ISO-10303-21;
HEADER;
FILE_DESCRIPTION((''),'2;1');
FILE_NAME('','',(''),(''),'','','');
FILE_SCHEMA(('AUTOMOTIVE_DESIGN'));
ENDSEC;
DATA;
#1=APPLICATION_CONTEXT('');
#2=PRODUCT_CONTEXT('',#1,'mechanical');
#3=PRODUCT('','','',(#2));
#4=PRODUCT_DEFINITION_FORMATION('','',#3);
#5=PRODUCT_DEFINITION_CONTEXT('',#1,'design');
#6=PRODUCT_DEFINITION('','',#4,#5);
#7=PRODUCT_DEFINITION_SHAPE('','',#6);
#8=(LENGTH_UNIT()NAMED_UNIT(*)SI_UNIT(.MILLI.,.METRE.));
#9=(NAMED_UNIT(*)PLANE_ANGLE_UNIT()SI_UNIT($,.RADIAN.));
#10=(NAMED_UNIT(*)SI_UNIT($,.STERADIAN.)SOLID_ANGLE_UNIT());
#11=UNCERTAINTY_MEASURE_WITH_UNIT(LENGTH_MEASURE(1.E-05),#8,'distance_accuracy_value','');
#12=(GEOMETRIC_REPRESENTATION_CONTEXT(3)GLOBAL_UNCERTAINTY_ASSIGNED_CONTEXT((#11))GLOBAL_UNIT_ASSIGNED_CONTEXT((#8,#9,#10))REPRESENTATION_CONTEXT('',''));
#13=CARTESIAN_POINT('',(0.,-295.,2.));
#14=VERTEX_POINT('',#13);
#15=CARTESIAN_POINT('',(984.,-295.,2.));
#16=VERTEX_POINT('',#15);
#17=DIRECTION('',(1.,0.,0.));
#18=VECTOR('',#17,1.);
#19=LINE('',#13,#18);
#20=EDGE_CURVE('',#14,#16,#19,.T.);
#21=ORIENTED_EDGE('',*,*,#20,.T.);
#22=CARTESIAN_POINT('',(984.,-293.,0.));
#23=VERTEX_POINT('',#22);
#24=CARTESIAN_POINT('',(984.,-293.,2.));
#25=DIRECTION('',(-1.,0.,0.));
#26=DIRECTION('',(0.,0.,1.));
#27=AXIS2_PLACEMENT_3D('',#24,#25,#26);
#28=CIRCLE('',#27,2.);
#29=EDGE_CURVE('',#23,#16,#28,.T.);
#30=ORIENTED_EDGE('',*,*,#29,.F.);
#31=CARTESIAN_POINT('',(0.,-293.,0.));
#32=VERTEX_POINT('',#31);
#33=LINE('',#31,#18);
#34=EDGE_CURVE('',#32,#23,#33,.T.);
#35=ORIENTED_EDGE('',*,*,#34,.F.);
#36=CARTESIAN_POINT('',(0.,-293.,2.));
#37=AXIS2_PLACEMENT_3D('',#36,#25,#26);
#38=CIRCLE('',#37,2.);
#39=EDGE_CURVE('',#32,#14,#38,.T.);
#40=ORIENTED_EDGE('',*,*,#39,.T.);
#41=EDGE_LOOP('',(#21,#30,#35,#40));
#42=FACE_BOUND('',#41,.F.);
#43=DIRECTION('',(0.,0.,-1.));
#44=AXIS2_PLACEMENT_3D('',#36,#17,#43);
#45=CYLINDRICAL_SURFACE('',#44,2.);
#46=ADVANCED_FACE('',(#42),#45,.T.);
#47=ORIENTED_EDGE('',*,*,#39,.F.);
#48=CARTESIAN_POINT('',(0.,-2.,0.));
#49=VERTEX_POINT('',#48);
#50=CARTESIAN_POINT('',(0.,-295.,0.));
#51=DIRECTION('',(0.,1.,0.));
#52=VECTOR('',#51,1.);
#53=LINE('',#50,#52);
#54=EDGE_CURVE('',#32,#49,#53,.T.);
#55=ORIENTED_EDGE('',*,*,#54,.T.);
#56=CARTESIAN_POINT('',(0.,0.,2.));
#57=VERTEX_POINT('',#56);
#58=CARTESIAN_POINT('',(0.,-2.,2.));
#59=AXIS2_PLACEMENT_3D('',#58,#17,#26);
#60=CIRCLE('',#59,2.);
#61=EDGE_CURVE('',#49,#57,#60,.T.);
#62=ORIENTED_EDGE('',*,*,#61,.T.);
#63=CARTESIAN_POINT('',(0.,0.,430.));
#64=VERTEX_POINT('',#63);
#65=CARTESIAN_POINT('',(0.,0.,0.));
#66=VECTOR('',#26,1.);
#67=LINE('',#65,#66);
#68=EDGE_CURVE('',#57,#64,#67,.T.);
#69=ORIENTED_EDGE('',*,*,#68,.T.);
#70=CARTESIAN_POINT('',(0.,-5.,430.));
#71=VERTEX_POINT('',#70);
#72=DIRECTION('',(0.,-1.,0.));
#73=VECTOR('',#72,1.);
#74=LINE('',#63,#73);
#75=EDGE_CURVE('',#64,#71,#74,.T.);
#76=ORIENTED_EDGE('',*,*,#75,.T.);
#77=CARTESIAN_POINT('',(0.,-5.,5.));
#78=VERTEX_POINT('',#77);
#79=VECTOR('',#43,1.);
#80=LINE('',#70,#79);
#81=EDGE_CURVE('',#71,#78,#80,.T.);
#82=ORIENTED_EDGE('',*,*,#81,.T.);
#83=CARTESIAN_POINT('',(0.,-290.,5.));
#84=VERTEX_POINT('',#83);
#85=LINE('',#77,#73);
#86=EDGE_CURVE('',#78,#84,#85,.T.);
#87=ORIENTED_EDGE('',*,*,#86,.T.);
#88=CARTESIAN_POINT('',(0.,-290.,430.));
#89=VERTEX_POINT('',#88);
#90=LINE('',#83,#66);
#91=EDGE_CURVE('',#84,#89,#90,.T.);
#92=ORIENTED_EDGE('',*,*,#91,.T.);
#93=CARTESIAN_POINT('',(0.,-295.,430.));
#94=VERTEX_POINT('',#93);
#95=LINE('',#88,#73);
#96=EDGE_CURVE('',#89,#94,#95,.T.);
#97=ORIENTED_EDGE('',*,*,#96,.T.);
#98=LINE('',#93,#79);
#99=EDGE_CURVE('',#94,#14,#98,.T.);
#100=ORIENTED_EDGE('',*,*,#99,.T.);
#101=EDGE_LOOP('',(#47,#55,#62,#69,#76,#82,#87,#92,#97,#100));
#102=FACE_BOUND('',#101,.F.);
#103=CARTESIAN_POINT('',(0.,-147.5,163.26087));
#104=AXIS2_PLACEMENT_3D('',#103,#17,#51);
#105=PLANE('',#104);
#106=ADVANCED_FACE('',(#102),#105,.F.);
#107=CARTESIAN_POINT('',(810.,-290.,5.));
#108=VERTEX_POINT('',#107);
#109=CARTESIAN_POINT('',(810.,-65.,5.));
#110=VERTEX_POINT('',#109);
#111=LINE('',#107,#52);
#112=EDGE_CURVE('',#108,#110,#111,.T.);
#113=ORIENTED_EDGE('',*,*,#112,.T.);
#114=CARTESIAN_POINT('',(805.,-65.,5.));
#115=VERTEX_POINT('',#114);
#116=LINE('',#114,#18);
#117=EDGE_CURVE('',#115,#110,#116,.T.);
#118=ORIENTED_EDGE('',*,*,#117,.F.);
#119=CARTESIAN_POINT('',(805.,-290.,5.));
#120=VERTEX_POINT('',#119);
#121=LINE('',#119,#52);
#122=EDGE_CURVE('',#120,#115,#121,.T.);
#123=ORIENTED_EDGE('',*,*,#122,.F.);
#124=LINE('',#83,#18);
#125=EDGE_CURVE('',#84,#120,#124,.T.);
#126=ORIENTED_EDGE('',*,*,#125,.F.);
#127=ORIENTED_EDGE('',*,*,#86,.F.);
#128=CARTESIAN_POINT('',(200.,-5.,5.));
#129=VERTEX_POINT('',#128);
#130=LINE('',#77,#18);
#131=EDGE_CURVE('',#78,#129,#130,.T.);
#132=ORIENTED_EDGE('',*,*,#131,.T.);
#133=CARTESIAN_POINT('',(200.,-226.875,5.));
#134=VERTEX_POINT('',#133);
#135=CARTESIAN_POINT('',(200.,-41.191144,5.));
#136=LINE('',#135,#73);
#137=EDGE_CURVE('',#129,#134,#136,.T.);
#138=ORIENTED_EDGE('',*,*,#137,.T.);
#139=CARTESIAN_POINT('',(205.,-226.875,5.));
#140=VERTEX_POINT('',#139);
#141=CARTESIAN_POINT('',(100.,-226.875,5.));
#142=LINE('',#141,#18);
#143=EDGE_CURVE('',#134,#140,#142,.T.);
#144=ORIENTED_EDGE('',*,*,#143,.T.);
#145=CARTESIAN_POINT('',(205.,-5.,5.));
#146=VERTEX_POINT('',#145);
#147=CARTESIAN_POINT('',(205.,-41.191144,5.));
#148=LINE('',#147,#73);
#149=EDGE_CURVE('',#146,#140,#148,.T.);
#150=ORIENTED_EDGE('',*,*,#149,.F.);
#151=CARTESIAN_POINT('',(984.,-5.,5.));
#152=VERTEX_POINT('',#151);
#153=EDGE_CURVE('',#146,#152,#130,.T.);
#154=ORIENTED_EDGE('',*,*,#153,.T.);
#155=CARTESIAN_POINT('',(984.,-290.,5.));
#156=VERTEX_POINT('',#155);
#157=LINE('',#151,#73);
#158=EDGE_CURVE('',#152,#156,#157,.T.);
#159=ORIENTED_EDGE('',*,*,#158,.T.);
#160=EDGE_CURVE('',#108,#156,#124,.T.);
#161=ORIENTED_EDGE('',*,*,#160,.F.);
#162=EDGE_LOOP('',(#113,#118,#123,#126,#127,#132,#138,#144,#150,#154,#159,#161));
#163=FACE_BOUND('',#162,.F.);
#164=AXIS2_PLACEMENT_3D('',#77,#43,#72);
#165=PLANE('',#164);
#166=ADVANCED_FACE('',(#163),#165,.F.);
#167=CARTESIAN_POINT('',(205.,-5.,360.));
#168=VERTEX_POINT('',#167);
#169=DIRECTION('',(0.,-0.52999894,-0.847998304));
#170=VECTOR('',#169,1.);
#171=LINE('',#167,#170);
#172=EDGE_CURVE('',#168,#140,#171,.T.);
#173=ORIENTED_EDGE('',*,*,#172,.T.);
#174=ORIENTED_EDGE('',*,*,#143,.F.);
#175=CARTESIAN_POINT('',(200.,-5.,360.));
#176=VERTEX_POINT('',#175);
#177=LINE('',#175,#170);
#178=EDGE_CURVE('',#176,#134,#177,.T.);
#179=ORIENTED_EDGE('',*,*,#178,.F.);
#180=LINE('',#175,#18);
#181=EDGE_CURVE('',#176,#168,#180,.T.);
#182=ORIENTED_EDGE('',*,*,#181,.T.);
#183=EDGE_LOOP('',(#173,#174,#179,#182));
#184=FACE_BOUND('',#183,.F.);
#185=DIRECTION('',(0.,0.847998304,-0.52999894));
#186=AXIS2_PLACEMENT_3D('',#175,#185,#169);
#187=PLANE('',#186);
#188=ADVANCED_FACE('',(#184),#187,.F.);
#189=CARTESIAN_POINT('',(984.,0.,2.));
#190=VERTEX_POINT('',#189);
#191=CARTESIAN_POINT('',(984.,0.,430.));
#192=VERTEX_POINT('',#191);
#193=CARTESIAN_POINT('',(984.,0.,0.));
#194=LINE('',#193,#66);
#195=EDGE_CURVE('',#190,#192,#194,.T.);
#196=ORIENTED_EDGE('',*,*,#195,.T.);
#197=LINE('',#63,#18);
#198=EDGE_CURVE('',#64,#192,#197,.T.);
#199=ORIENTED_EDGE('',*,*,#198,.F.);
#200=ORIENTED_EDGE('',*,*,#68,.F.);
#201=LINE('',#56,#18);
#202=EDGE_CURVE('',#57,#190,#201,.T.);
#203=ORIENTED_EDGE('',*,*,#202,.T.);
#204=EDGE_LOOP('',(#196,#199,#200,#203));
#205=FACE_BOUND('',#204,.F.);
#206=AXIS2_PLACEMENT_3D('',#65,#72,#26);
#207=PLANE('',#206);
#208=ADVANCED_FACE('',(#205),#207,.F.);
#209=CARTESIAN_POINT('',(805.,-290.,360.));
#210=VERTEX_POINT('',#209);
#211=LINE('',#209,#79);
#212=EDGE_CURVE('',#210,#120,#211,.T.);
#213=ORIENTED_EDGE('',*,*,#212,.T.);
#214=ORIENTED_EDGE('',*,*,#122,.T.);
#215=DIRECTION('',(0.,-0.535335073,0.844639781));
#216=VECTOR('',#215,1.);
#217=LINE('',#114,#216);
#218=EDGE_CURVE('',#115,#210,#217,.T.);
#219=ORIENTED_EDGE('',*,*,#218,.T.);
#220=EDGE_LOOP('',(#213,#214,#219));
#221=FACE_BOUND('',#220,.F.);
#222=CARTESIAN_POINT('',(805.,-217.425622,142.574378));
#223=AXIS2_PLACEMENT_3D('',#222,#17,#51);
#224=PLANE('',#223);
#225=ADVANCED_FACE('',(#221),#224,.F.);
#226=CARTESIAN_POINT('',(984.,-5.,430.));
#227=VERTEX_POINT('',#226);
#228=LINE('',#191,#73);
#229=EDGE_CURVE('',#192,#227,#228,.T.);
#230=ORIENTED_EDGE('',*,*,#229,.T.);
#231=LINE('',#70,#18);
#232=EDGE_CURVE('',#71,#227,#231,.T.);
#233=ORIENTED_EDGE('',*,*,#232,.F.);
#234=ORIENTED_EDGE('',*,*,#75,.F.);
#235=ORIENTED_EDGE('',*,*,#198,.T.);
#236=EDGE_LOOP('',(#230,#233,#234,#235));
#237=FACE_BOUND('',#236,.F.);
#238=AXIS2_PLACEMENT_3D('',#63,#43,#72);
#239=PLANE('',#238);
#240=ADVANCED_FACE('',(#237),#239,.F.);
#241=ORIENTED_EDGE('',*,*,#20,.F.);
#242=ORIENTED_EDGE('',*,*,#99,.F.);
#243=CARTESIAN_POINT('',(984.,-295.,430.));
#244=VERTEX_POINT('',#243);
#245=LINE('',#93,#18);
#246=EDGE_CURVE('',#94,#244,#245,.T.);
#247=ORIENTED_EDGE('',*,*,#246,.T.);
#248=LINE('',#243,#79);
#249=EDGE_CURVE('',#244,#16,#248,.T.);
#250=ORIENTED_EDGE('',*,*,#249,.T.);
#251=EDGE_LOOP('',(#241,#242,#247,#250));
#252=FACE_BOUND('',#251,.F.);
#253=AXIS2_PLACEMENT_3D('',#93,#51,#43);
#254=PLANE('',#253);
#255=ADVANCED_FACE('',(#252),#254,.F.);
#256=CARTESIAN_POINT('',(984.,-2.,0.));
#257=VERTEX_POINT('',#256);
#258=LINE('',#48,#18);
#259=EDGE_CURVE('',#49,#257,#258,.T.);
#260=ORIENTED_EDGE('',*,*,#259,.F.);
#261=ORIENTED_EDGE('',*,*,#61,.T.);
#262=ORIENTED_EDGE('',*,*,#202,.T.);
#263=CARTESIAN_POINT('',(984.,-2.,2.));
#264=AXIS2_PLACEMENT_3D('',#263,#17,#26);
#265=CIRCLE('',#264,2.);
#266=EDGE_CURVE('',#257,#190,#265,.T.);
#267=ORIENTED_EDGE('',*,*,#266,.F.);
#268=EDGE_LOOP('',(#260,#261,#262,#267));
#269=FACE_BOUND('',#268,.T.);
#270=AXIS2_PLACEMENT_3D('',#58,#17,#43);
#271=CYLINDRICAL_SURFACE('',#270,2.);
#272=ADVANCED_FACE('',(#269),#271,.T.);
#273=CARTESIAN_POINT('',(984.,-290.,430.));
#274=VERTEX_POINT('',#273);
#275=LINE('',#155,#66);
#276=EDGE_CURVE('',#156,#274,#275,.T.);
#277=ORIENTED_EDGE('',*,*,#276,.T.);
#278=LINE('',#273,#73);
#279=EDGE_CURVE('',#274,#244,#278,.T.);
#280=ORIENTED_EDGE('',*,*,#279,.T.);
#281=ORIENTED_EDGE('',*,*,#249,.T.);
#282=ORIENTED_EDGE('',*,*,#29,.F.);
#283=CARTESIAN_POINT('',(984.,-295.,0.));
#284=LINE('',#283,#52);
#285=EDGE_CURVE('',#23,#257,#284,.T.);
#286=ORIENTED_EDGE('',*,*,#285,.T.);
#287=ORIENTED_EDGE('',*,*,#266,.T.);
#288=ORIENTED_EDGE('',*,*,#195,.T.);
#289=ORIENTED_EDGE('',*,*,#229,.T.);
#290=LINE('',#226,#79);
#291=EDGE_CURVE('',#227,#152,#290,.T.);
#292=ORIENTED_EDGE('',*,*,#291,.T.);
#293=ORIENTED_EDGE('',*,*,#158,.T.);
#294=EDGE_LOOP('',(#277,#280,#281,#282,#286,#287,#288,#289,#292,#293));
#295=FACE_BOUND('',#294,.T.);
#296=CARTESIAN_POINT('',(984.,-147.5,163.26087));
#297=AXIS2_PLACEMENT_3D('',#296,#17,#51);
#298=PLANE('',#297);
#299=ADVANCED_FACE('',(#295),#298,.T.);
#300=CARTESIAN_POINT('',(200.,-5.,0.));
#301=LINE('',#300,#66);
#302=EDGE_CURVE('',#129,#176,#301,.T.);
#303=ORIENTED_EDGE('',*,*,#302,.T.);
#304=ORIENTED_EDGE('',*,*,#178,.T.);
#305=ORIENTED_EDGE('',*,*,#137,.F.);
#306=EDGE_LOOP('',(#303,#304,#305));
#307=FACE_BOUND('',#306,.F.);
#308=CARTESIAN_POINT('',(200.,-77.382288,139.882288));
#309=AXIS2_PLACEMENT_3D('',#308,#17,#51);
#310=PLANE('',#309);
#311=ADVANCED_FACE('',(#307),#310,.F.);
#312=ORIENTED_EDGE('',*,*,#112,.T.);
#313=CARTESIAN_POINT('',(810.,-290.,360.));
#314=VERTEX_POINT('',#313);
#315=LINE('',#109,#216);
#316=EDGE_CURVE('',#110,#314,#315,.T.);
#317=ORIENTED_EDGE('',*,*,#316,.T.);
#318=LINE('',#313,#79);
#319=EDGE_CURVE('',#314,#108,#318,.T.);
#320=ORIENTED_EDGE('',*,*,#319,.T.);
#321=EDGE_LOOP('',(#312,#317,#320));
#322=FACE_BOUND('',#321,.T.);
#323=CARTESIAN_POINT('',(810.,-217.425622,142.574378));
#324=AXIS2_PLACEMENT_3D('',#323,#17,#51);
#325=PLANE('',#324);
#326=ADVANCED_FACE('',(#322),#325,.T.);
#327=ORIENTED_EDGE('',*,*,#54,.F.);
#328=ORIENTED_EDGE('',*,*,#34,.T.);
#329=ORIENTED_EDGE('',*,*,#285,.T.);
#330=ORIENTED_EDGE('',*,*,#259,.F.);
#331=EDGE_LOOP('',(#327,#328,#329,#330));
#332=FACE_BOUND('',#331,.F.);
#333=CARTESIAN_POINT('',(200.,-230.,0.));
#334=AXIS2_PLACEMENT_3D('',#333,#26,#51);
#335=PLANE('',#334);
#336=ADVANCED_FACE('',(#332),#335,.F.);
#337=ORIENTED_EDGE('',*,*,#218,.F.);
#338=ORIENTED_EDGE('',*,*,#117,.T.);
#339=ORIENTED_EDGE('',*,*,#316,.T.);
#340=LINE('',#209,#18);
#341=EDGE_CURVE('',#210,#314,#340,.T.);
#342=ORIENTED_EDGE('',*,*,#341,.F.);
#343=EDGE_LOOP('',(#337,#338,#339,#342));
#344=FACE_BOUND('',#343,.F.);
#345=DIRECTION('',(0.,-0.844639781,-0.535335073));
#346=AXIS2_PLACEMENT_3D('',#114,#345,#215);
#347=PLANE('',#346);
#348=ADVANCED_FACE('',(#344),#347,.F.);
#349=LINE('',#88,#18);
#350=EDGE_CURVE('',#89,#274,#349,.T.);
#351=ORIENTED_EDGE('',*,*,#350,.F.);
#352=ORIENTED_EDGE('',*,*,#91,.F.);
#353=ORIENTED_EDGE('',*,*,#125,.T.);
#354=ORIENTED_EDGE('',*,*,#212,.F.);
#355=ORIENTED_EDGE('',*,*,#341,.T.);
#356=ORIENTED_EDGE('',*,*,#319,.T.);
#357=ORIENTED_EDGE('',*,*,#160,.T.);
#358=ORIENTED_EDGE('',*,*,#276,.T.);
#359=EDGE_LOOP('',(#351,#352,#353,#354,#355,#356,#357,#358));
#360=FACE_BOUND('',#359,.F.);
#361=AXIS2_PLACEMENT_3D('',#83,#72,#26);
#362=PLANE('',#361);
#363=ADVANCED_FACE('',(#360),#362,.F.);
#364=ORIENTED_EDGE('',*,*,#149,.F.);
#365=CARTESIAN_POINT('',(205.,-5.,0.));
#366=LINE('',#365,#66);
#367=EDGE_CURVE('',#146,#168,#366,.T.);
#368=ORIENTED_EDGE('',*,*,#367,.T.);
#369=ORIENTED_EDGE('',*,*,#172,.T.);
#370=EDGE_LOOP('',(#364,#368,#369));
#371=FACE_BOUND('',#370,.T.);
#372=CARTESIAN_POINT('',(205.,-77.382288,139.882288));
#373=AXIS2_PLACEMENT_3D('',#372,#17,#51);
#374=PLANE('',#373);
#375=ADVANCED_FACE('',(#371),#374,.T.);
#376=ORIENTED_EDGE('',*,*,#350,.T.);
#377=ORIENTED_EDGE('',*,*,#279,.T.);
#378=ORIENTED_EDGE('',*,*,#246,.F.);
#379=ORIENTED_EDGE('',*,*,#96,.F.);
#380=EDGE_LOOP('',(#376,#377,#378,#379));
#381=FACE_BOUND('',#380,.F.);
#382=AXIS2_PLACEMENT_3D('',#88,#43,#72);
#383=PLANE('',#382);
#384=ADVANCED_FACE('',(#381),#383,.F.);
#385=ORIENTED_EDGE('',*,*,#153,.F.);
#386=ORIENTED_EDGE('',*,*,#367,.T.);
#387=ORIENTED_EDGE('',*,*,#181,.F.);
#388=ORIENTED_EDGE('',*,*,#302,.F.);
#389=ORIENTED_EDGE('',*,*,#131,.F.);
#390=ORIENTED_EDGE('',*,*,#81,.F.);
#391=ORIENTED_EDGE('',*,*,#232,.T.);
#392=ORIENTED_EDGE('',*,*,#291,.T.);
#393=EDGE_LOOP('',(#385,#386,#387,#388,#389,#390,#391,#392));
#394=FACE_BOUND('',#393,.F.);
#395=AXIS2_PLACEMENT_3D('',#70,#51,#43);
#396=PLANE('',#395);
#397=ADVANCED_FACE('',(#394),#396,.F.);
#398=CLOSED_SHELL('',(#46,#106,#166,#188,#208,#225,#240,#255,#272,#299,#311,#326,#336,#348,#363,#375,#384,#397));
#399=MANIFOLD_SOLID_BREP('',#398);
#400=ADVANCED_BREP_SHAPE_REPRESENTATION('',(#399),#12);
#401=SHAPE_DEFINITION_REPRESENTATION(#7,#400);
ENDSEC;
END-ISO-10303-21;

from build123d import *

# Parameters (mm, degrees)
F1_DEPTH = 984
F4_DEPTH = 5
F7_DEPTH = 5
F8_R     = 2


# Not quite as in the source:
# - a feature names something its author has since deleted; it is built from what else it names


with BuildPart() as f1:
    # F0 (on Right) → F1 (new body)
    with BuildSketch(Plane.YZ):
        Polygon((-295, 0), (0, 0), (0, 430), (-5, 430), (-5, 5), (-290, 5), (-290, 430), (-295, 430), align=None)
    extrude(amount=F1_DEPTH)

    # F3 (on offset) → F4 (join)
    with BuildSketch(Plane.YZ.offset(200)):
        Polygon((-230, 0), (-5, 0), (-5, 360), align=None)
    extrude(amount=F4_DEPTH)

    # F6 (on offset) → F7 (join)
    with BuildSketch(Plane.YZ.offset(805)):
        Polygon((-290, 360), (-290, 5), (-65, 5), align=None)
    extrude(amount=F7_DEPTH)

    # F8
    f8_edges = [f1.edges().sort_by_distance(p)[0] for p in [
        (492, 0, 0),
        (492, -295, 0),
    ]]
    fillet(f8_edges, radius=F8_R)


solid = f1.part
